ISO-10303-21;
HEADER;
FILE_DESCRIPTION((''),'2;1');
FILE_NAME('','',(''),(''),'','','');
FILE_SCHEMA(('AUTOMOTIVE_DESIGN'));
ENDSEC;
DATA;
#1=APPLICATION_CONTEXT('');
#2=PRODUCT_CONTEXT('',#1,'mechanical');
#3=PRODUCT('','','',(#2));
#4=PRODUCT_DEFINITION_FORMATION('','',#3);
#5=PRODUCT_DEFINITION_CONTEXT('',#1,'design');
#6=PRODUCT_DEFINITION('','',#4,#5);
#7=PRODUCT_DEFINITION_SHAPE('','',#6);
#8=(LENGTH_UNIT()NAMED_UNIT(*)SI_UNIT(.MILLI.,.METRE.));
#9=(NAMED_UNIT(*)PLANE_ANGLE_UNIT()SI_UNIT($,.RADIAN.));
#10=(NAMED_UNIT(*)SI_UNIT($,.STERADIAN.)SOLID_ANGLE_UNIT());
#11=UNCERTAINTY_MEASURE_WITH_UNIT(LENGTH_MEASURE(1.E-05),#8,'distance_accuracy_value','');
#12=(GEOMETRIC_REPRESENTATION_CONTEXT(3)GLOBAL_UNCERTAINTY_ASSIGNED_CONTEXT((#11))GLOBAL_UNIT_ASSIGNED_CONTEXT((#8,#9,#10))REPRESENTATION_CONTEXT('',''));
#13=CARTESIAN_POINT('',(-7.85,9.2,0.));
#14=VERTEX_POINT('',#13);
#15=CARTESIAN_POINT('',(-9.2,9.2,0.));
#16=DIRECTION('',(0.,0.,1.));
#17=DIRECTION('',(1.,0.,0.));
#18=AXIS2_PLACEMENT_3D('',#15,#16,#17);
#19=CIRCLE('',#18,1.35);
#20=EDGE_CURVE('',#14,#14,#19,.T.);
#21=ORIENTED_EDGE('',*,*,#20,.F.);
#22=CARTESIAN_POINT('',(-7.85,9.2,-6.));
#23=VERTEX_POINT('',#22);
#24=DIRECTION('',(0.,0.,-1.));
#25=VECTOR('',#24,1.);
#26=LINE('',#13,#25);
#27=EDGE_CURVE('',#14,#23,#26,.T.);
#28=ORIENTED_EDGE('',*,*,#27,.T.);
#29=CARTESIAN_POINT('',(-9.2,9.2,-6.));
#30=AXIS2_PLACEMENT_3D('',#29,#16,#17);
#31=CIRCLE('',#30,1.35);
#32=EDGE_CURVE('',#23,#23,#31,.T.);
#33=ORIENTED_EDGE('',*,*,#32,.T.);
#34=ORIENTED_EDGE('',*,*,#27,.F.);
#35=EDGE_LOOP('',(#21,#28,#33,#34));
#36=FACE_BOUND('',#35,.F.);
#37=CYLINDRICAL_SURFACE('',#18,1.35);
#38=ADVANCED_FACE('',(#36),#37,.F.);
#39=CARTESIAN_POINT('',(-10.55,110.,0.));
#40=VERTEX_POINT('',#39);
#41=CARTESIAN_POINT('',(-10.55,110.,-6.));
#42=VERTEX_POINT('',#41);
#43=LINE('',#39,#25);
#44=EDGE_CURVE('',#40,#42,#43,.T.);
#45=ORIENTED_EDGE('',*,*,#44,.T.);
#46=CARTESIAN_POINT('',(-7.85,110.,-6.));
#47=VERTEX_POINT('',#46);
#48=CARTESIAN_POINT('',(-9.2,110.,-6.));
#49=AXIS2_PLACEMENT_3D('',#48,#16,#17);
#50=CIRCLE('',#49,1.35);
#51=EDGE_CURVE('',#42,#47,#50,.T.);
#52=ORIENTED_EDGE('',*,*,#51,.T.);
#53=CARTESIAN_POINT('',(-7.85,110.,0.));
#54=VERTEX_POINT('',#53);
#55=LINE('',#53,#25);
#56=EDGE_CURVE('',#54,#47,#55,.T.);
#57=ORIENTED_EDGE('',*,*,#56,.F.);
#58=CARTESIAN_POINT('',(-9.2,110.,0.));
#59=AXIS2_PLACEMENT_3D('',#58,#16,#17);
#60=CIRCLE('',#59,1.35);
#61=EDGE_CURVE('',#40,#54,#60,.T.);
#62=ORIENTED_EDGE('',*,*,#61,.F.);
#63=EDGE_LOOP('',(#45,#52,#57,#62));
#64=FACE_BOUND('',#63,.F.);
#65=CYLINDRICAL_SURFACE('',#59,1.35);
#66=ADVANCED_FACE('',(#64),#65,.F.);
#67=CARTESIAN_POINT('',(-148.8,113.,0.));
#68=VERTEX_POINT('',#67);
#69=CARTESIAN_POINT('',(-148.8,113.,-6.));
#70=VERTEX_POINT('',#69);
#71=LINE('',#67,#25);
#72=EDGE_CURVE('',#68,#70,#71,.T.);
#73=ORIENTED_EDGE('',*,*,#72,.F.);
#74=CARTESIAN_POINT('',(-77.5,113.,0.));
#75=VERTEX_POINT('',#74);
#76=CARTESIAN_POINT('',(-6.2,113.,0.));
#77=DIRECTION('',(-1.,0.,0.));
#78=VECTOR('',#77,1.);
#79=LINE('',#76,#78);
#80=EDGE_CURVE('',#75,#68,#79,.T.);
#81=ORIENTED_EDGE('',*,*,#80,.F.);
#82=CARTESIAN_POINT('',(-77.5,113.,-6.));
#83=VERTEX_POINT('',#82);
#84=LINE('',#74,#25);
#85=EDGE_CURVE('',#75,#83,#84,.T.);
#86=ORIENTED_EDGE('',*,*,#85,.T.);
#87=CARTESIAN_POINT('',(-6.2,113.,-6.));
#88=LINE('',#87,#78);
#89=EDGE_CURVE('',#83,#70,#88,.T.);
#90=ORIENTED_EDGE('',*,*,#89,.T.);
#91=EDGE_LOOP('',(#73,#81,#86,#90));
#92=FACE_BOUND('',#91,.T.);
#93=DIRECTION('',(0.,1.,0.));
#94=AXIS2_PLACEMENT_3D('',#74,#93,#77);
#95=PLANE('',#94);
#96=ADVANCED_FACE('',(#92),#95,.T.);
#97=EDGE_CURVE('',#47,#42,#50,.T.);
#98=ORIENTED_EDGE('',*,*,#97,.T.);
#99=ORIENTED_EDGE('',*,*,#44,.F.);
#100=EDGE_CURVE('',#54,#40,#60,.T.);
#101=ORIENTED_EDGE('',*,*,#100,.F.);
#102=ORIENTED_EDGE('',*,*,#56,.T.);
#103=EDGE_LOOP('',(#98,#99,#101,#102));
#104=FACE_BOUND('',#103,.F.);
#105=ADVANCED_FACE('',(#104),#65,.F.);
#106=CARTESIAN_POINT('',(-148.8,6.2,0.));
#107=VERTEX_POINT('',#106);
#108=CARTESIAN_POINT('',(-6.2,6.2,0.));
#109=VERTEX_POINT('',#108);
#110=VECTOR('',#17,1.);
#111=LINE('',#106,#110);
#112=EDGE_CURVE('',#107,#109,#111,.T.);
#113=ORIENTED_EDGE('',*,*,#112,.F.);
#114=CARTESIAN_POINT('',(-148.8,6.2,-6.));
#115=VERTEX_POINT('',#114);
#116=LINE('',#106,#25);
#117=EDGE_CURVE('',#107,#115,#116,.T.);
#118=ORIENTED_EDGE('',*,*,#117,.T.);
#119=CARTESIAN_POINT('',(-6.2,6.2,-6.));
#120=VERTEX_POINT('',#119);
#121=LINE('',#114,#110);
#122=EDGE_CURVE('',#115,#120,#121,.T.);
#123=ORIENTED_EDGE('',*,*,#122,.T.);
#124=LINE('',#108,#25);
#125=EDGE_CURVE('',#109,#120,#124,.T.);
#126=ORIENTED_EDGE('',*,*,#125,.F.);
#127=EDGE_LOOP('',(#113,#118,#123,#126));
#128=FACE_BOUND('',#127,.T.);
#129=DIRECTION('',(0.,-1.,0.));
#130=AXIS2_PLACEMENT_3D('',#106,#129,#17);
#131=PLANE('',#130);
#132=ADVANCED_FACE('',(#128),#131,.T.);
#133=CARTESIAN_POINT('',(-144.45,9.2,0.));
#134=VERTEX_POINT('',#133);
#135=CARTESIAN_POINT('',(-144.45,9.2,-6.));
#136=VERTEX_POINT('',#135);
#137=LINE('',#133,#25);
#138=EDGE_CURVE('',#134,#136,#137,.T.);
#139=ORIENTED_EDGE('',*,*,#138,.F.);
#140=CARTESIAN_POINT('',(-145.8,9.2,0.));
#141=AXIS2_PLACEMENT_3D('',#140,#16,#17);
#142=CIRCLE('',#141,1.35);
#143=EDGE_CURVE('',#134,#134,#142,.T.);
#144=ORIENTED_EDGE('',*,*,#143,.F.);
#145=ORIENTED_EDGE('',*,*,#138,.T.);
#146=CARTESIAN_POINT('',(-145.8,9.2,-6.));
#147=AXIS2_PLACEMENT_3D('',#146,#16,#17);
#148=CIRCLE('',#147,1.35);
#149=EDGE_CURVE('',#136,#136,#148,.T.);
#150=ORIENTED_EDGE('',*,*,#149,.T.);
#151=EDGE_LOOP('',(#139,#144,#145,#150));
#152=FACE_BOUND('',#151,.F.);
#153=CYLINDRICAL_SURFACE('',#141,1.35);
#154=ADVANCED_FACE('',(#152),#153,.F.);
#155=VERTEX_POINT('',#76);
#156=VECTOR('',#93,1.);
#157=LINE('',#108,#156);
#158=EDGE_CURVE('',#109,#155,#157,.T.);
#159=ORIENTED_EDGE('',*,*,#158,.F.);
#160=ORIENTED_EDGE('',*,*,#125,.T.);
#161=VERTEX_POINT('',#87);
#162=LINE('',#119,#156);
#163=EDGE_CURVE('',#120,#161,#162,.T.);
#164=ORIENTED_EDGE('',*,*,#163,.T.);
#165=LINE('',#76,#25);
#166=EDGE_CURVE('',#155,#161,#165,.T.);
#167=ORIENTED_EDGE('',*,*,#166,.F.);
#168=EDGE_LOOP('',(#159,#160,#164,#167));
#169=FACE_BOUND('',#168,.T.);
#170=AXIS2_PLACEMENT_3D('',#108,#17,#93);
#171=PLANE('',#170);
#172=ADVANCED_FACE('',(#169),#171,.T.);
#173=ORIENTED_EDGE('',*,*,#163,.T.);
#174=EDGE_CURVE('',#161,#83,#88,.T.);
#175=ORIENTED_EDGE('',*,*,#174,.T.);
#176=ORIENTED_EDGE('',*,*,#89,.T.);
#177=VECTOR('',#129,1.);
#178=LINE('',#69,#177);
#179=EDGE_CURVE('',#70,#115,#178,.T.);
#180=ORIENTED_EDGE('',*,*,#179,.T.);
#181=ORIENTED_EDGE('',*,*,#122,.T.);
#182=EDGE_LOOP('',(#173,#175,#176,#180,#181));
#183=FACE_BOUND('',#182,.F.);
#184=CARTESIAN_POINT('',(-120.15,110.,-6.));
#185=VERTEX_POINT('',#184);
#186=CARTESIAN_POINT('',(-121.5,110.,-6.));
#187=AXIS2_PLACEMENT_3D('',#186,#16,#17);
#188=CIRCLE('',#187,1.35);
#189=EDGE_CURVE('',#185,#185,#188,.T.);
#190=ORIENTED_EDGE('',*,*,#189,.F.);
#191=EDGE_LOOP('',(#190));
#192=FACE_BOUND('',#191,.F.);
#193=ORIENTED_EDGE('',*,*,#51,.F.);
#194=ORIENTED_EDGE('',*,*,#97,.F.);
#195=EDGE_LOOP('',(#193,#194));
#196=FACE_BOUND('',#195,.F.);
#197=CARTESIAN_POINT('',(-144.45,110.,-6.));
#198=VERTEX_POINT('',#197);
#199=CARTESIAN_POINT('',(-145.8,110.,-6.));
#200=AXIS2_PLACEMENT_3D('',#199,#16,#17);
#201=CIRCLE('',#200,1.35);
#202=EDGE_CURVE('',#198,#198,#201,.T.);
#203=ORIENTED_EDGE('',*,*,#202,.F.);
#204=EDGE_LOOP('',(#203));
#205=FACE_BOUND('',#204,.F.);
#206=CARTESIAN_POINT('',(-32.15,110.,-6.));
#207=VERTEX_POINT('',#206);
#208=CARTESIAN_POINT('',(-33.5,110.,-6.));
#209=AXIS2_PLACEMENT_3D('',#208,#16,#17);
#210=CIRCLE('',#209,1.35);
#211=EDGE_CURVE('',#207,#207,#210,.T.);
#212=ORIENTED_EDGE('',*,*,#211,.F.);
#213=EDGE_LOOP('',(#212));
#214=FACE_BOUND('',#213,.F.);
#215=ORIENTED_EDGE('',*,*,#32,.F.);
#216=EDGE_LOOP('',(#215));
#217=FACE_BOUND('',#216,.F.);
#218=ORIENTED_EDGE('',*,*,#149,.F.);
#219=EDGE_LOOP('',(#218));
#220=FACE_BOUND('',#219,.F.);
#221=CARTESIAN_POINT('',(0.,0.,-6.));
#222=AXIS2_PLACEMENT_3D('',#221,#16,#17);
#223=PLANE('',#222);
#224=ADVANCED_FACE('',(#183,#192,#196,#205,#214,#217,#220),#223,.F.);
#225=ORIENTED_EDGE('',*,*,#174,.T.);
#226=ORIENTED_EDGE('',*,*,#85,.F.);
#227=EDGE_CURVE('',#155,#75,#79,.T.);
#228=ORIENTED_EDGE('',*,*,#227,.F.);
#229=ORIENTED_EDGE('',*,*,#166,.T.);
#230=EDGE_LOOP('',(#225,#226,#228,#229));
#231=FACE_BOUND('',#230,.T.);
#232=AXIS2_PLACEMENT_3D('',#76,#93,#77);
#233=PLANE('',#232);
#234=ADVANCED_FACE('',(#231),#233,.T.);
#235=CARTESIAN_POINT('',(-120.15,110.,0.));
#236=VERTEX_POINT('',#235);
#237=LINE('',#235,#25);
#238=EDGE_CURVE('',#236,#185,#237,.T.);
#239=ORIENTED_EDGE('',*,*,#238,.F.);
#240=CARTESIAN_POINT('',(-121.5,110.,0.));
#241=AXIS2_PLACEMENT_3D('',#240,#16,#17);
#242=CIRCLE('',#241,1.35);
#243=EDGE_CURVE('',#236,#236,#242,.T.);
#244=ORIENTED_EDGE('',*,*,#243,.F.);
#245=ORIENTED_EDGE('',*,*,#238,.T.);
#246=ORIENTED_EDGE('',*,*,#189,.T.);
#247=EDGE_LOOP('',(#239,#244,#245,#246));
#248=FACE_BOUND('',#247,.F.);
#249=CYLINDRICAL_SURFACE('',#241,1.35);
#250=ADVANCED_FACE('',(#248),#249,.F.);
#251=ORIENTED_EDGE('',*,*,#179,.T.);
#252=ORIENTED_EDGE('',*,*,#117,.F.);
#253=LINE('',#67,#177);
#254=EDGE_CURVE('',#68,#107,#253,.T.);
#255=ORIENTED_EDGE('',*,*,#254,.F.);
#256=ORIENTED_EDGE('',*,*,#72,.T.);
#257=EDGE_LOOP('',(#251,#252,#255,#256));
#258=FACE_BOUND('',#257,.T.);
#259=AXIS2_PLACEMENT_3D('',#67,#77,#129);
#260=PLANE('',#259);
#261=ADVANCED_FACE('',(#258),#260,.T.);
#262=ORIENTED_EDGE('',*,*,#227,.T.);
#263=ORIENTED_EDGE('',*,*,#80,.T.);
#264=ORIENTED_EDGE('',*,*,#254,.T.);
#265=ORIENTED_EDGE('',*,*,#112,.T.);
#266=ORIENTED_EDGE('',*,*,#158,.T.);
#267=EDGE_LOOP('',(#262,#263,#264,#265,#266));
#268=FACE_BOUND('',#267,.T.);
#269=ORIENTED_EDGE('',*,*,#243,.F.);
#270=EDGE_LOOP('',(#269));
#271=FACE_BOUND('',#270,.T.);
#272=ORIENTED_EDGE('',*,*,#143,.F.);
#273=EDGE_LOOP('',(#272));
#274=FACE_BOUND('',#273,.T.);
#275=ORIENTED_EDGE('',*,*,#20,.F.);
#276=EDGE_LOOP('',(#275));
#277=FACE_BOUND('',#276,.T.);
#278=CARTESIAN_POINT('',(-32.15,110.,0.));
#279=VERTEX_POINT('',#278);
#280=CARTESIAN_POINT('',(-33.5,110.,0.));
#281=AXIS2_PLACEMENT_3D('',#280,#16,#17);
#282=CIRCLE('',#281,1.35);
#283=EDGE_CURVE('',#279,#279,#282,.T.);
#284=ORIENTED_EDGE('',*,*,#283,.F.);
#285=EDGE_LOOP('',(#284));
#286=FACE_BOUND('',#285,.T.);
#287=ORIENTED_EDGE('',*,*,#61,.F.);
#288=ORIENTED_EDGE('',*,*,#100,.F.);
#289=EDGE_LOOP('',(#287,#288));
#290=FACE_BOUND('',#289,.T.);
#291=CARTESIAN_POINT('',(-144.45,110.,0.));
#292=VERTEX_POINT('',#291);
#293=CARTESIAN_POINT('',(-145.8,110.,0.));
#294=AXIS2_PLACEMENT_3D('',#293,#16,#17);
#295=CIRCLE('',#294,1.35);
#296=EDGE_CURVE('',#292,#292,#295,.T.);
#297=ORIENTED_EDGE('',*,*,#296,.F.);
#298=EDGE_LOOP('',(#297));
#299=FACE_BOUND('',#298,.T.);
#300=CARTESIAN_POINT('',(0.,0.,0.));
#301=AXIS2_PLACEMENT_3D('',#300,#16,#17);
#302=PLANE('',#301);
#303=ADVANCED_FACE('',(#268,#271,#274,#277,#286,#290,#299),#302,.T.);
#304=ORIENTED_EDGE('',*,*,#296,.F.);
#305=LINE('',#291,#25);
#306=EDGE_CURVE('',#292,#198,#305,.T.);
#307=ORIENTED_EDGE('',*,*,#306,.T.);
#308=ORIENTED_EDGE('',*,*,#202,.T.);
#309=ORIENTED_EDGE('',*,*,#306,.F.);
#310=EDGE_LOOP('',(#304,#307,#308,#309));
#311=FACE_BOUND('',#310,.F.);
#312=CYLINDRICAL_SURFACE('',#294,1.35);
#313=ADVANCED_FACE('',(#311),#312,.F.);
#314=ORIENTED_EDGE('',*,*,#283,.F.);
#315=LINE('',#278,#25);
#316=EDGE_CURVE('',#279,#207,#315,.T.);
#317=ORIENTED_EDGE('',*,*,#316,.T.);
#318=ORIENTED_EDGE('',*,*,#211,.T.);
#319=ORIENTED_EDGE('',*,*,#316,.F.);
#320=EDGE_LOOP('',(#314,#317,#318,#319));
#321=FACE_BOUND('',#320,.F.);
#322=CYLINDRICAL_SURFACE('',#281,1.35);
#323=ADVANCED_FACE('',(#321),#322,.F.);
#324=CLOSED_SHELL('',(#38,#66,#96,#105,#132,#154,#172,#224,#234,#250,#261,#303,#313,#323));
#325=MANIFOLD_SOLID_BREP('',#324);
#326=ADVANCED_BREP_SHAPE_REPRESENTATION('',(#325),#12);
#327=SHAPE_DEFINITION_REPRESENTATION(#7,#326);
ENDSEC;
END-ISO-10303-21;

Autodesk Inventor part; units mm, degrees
ref_plane "YZ Plane" through (0, 0, 0) normal (1, 0, 0) x (0, 1, 0)
ref_plane "XZ Plane" through (0, 0, 0) normal (0, 1, 0) x (-1, 0, 0)
ref_plane "XY Plane" through (0, 0, 0) normal (0, 0, 1) x (1, 0, 0)
sketch "스케치1" plane through (0, 0, 0) normal (0, 0, 1) x (1, 0, 0)
  line L0 (-155, 119.2) -> (0, 119.2) projected
  line L1 (-155, 0) -> (-155, 119.2) projected
  line L2 (0, 0) -> (-155, 0) projected
  line L3 (0, 119.2) -> (0, 0) projected
  line L4 (-6.2, 113) -> (-148.8, 113)
  line L5 (-148.8, 113) -> (-148.8, 6.2)
  line L6 (-148.8, 6.2) -> (-6.2, 6.2)
  line L7 (-6.2, 6.2) -> (-6.2, 113)
  circle A0 centre (-9.2, 110) radius 1.35 projected
  circle A1 centre (-145.8, 110) radius 1.35 projected
  circle A2 centre (-145.8, 9.2) radius 1.35 projected
  circle A3 centre (-9.2, 9.2) radius 1.35 projected
  line L8 (-9.2, 110) -> (-33.5, 110)
  circle A4 centre (-33.5, 110) radius 1.35
  line L9 (-77.5, 113) -> (-77.5, 108.65)
  circle A5 centre (-121.5, 110) radius 1.35
  point P0 (-6, 113.2)
  dimension "d3" = 24.3
  dimension "d4" = 2.7
extrude "돌출1" add sketch "스케치1" against normal blind 6 contours L7 L6 L5 L4
properties part number "chest_box_cap" material "PMMA 플라스틱"
